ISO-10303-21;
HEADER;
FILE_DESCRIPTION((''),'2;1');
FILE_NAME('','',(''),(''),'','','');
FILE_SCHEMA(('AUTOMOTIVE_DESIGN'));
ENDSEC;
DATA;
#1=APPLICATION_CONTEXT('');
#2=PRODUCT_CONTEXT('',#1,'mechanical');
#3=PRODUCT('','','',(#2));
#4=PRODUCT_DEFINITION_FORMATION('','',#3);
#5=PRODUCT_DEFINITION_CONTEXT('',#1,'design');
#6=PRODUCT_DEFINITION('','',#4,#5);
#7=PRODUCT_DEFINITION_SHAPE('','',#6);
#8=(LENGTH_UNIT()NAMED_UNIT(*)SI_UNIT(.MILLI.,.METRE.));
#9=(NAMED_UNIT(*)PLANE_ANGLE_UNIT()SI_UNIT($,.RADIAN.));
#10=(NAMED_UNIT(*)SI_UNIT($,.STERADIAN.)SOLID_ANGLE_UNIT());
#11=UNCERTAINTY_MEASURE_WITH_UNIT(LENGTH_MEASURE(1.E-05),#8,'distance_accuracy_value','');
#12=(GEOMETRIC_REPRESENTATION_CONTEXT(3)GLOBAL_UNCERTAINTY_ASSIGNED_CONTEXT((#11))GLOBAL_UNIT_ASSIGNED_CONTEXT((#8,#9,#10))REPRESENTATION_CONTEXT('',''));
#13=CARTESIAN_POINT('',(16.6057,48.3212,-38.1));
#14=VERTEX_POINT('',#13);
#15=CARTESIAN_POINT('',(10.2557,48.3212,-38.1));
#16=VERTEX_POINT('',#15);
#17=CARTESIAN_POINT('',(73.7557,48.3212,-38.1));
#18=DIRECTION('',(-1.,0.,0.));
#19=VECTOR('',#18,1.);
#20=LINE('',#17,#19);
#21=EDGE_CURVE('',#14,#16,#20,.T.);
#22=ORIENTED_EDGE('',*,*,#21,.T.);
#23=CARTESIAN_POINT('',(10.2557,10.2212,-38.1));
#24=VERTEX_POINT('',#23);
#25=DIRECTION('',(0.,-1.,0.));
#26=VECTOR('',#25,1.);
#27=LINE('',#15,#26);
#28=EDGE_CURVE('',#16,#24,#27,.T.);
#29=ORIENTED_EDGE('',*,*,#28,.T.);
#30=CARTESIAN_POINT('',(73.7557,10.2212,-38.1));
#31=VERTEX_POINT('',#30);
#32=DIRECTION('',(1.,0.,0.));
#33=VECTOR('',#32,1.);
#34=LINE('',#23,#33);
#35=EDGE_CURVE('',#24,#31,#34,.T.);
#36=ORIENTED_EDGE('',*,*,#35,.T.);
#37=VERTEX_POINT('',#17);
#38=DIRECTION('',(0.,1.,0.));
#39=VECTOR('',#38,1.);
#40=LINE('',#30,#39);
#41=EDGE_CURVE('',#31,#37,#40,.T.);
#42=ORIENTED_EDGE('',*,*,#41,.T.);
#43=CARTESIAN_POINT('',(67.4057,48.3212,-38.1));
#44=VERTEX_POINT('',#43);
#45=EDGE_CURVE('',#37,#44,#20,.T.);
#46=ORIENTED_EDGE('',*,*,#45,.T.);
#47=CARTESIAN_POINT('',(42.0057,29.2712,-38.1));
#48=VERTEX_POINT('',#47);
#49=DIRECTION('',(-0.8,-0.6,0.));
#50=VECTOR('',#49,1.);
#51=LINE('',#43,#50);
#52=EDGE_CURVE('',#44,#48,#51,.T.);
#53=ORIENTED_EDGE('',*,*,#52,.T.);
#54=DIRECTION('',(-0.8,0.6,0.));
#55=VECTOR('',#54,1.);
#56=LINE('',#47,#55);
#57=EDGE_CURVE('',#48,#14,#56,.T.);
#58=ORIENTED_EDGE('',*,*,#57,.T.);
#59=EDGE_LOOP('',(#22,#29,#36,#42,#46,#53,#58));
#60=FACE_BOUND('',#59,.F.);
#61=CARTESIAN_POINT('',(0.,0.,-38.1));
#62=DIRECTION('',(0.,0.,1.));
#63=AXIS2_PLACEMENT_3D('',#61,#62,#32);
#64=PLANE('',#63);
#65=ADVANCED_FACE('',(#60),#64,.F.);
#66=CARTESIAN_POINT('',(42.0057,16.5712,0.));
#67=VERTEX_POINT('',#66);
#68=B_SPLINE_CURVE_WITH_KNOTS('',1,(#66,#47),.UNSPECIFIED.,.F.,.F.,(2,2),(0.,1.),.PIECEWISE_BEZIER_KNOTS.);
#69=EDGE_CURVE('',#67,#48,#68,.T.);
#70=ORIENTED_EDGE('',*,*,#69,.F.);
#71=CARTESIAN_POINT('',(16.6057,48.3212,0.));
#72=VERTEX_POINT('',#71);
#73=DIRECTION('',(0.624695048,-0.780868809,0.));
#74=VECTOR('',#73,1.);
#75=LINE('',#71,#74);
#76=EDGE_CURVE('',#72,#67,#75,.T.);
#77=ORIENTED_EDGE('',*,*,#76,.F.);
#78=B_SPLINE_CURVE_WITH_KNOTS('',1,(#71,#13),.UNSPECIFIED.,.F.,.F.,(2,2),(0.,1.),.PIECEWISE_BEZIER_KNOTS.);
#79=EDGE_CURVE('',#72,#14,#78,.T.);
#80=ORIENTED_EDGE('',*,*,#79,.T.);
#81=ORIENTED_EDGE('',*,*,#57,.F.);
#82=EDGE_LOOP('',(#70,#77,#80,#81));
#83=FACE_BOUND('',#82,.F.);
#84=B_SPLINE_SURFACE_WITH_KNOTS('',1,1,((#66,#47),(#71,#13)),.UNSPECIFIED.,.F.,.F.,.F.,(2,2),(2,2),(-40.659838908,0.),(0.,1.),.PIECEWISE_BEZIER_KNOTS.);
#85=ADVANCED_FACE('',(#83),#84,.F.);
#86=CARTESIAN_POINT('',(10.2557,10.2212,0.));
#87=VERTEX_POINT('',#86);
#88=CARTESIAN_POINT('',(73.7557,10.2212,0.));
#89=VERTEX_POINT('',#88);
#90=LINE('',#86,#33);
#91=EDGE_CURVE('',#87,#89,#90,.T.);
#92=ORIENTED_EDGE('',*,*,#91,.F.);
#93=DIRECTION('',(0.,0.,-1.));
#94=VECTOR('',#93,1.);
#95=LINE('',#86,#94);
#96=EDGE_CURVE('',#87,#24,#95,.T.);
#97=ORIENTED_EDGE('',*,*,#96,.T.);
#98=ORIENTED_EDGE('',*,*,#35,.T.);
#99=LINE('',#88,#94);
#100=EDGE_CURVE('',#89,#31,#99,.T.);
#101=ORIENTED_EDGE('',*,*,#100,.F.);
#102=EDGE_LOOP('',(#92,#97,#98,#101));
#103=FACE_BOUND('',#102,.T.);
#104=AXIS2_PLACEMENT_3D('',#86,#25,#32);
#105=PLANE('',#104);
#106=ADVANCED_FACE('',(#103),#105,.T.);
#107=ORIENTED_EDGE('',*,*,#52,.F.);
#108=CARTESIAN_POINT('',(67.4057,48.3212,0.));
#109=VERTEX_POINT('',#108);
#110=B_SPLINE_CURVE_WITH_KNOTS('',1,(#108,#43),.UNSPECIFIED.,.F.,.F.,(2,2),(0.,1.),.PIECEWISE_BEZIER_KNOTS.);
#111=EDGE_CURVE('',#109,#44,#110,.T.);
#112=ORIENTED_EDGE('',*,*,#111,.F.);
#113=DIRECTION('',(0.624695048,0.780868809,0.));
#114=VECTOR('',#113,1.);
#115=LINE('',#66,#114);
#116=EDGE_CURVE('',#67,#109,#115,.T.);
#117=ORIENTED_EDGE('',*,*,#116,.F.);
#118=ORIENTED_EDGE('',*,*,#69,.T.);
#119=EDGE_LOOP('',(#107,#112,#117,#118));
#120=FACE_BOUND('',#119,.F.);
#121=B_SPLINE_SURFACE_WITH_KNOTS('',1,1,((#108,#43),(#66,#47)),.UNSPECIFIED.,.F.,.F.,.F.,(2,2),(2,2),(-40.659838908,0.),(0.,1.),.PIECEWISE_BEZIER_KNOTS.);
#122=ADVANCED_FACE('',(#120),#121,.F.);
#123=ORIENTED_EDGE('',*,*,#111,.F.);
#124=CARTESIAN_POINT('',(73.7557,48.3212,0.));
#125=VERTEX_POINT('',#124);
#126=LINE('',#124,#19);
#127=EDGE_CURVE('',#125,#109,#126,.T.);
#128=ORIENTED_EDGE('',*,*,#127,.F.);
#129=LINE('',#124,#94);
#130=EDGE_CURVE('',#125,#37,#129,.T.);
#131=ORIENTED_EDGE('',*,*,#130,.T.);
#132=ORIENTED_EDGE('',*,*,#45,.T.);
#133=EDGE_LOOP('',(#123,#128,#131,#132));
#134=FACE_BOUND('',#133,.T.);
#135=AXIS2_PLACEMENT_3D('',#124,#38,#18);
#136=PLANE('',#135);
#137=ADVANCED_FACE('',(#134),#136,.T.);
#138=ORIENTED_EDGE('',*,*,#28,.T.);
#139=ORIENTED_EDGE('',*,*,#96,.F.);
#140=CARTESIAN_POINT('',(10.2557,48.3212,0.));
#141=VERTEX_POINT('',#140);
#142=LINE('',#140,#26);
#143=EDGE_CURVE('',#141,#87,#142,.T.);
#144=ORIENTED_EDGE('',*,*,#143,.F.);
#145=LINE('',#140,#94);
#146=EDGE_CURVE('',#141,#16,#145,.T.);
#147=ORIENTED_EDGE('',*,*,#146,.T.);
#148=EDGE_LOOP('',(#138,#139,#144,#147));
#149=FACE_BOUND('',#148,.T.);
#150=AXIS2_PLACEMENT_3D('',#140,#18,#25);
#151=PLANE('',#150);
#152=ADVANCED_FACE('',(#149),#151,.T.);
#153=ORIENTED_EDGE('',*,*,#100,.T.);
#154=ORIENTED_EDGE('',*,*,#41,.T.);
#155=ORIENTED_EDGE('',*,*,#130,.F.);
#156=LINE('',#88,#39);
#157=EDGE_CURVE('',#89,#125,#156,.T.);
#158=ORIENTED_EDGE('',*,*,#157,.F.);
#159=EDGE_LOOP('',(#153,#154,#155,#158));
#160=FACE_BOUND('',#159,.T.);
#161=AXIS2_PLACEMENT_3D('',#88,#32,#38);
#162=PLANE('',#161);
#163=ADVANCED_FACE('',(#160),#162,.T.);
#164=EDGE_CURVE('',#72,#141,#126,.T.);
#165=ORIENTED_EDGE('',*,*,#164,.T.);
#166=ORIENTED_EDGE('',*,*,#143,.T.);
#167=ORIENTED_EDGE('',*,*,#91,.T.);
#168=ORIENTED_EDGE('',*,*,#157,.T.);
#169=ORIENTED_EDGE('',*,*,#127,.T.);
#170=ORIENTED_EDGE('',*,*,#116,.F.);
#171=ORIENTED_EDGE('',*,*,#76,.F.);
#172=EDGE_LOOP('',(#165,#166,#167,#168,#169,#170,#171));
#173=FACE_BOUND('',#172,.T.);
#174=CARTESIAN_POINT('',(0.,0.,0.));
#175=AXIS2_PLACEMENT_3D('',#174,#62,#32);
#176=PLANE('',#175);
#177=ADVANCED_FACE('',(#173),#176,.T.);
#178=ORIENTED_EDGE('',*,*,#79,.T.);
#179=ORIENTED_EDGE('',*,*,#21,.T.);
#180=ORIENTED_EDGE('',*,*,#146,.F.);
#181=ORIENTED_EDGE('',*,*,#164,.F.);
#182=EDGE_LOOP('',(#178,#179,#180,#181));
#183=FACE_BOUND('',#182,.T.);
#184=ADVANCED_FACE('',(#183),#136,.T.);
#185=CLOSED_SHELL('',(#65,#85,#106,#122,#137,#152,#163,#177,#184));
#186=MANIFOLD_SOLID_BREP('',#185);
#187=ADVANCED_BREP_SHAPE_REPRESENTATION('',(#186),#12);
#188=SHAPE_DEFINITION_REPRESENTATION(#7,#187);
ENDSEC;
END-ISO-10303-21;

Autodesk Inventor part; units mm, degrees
ref_plane "YZ Plane" through (0, 0, 0) normal (1, 0, 0) x (0, 1, 0)
ref_plane "XZ Plane" through (0, 0, 0) normal (0, 1, 0) x (-1, 0, 0)
ref_plane "XY Plane" through (0, 0, 0) normal (0, 0, 1) x (1, 0, 0)
sketch "Sketch1" plane through (0, 0, 0) normal (0, 0, 1) x (1, 0, 0)
  line L0 (10.2557, 10.2212) -> (73.7557, 10.2212)
  line L1 (73.7557, 10.2212) -> (73.7557, 48.3212)
  line L2 (73.7557, 48.3212) -> (10.2557, 48.3212)
  line L3 (10.2557, 48.3212) -> (10.2557, 10.2212)
  point P0 (0, 0)
  dimension "d0" = 63.5
  dimension "d1" = 38.1
extrude "Extrusion1" add sketch "Sketch1" against normal blind 38.1
sketch "Sketch2" plane through (0, 0, 0) normal (0, 0, 1) x (1, 0, 0)
  line L0 (10.2557, 10.2212) -> (73.7557, 10.2212) projected
  line L1 (73.7557, 10.2212) -> (73.7557, 48.3212) projected
  line L2 (73.7557, 48.3212) -> (10.2557, 48.3212) projected
  line L3 (10.2557, 48.3212) -> (10.2557, 10.2212) projected
  line L4 (10.2557, 48.3212) -> (73.7557, 48.3212)
  line L5 (73.7557, 48.3212) -> (73.7557, 10.2212)
  line L6 (73.7557, 10.2212) -> (10.2557, 10.2212)
  line L7 (10.2557, 10.2212) -> (10.2557, 48.3212)
  line L8 (10.2557, 48.3212) -> (73.7557, 48.3212) projected
  line L9 (16.6057, 48.3212) -> (42.0057, 16.5712)
  line L10 (42.0057, 16.5712) -> (67.4057, 48.3212)
  point P0 (0, 0)
  dimension "d4" = 6.35
  dimension "d5" = 6.35
  dimension "d6" = 6.35
sketch "Sketch3" plane through (0, 0, -38.1) normal (0, 0, -1) x (-1, 0, 0)
  line L0 (-73.7557, 10.2212) -> (-10.2557, 10.2212) projected
  line L1 (-10.2557, 10.2212) -> (-10.2557, 48.3212) projected
  line L2 (-10.2557, 48.3212) -> (-73.7557, 48.3212) projected
  line L3 (-73.7557, 48.3212) -> (-73.7557, 10.2212) projected
  line L4 (-73.7557, 48.3212) -> (-10.2557, 48.3212)
  line L5 (-10.2557, 48.3212) -> (-10.2557, 10.2212)
  line L6 (-10.2557, 10.2212) -> (-73.7557, 10.2212)
  line L7 (-73.7557, 10.2212) -> (-73.7557, 48.3212)
  line L8 (-10.2557, 48.3212) -> (-73.7557, 48.3212) projected
  line L9 (-67.4057, 48.3212) -> (-42.0057, 29.2712)
  line L10 (-42.0057, 29.2712) -> (-16.6057, 48.3212)
  point P0 (0, 0)
  dimension "d7" = 19.05
  dimension "d8" = 6.35
  dimension "d9" = 6.35
loft "Loft1" cut profiles "Sketch2", "Sketch3" keep common part contours L3 L2 L9 L10 L1 L0 / L3 L2 L9 L10 L1 L0
equation "\"d6\" = d5"
properties part number "LoftCut"
